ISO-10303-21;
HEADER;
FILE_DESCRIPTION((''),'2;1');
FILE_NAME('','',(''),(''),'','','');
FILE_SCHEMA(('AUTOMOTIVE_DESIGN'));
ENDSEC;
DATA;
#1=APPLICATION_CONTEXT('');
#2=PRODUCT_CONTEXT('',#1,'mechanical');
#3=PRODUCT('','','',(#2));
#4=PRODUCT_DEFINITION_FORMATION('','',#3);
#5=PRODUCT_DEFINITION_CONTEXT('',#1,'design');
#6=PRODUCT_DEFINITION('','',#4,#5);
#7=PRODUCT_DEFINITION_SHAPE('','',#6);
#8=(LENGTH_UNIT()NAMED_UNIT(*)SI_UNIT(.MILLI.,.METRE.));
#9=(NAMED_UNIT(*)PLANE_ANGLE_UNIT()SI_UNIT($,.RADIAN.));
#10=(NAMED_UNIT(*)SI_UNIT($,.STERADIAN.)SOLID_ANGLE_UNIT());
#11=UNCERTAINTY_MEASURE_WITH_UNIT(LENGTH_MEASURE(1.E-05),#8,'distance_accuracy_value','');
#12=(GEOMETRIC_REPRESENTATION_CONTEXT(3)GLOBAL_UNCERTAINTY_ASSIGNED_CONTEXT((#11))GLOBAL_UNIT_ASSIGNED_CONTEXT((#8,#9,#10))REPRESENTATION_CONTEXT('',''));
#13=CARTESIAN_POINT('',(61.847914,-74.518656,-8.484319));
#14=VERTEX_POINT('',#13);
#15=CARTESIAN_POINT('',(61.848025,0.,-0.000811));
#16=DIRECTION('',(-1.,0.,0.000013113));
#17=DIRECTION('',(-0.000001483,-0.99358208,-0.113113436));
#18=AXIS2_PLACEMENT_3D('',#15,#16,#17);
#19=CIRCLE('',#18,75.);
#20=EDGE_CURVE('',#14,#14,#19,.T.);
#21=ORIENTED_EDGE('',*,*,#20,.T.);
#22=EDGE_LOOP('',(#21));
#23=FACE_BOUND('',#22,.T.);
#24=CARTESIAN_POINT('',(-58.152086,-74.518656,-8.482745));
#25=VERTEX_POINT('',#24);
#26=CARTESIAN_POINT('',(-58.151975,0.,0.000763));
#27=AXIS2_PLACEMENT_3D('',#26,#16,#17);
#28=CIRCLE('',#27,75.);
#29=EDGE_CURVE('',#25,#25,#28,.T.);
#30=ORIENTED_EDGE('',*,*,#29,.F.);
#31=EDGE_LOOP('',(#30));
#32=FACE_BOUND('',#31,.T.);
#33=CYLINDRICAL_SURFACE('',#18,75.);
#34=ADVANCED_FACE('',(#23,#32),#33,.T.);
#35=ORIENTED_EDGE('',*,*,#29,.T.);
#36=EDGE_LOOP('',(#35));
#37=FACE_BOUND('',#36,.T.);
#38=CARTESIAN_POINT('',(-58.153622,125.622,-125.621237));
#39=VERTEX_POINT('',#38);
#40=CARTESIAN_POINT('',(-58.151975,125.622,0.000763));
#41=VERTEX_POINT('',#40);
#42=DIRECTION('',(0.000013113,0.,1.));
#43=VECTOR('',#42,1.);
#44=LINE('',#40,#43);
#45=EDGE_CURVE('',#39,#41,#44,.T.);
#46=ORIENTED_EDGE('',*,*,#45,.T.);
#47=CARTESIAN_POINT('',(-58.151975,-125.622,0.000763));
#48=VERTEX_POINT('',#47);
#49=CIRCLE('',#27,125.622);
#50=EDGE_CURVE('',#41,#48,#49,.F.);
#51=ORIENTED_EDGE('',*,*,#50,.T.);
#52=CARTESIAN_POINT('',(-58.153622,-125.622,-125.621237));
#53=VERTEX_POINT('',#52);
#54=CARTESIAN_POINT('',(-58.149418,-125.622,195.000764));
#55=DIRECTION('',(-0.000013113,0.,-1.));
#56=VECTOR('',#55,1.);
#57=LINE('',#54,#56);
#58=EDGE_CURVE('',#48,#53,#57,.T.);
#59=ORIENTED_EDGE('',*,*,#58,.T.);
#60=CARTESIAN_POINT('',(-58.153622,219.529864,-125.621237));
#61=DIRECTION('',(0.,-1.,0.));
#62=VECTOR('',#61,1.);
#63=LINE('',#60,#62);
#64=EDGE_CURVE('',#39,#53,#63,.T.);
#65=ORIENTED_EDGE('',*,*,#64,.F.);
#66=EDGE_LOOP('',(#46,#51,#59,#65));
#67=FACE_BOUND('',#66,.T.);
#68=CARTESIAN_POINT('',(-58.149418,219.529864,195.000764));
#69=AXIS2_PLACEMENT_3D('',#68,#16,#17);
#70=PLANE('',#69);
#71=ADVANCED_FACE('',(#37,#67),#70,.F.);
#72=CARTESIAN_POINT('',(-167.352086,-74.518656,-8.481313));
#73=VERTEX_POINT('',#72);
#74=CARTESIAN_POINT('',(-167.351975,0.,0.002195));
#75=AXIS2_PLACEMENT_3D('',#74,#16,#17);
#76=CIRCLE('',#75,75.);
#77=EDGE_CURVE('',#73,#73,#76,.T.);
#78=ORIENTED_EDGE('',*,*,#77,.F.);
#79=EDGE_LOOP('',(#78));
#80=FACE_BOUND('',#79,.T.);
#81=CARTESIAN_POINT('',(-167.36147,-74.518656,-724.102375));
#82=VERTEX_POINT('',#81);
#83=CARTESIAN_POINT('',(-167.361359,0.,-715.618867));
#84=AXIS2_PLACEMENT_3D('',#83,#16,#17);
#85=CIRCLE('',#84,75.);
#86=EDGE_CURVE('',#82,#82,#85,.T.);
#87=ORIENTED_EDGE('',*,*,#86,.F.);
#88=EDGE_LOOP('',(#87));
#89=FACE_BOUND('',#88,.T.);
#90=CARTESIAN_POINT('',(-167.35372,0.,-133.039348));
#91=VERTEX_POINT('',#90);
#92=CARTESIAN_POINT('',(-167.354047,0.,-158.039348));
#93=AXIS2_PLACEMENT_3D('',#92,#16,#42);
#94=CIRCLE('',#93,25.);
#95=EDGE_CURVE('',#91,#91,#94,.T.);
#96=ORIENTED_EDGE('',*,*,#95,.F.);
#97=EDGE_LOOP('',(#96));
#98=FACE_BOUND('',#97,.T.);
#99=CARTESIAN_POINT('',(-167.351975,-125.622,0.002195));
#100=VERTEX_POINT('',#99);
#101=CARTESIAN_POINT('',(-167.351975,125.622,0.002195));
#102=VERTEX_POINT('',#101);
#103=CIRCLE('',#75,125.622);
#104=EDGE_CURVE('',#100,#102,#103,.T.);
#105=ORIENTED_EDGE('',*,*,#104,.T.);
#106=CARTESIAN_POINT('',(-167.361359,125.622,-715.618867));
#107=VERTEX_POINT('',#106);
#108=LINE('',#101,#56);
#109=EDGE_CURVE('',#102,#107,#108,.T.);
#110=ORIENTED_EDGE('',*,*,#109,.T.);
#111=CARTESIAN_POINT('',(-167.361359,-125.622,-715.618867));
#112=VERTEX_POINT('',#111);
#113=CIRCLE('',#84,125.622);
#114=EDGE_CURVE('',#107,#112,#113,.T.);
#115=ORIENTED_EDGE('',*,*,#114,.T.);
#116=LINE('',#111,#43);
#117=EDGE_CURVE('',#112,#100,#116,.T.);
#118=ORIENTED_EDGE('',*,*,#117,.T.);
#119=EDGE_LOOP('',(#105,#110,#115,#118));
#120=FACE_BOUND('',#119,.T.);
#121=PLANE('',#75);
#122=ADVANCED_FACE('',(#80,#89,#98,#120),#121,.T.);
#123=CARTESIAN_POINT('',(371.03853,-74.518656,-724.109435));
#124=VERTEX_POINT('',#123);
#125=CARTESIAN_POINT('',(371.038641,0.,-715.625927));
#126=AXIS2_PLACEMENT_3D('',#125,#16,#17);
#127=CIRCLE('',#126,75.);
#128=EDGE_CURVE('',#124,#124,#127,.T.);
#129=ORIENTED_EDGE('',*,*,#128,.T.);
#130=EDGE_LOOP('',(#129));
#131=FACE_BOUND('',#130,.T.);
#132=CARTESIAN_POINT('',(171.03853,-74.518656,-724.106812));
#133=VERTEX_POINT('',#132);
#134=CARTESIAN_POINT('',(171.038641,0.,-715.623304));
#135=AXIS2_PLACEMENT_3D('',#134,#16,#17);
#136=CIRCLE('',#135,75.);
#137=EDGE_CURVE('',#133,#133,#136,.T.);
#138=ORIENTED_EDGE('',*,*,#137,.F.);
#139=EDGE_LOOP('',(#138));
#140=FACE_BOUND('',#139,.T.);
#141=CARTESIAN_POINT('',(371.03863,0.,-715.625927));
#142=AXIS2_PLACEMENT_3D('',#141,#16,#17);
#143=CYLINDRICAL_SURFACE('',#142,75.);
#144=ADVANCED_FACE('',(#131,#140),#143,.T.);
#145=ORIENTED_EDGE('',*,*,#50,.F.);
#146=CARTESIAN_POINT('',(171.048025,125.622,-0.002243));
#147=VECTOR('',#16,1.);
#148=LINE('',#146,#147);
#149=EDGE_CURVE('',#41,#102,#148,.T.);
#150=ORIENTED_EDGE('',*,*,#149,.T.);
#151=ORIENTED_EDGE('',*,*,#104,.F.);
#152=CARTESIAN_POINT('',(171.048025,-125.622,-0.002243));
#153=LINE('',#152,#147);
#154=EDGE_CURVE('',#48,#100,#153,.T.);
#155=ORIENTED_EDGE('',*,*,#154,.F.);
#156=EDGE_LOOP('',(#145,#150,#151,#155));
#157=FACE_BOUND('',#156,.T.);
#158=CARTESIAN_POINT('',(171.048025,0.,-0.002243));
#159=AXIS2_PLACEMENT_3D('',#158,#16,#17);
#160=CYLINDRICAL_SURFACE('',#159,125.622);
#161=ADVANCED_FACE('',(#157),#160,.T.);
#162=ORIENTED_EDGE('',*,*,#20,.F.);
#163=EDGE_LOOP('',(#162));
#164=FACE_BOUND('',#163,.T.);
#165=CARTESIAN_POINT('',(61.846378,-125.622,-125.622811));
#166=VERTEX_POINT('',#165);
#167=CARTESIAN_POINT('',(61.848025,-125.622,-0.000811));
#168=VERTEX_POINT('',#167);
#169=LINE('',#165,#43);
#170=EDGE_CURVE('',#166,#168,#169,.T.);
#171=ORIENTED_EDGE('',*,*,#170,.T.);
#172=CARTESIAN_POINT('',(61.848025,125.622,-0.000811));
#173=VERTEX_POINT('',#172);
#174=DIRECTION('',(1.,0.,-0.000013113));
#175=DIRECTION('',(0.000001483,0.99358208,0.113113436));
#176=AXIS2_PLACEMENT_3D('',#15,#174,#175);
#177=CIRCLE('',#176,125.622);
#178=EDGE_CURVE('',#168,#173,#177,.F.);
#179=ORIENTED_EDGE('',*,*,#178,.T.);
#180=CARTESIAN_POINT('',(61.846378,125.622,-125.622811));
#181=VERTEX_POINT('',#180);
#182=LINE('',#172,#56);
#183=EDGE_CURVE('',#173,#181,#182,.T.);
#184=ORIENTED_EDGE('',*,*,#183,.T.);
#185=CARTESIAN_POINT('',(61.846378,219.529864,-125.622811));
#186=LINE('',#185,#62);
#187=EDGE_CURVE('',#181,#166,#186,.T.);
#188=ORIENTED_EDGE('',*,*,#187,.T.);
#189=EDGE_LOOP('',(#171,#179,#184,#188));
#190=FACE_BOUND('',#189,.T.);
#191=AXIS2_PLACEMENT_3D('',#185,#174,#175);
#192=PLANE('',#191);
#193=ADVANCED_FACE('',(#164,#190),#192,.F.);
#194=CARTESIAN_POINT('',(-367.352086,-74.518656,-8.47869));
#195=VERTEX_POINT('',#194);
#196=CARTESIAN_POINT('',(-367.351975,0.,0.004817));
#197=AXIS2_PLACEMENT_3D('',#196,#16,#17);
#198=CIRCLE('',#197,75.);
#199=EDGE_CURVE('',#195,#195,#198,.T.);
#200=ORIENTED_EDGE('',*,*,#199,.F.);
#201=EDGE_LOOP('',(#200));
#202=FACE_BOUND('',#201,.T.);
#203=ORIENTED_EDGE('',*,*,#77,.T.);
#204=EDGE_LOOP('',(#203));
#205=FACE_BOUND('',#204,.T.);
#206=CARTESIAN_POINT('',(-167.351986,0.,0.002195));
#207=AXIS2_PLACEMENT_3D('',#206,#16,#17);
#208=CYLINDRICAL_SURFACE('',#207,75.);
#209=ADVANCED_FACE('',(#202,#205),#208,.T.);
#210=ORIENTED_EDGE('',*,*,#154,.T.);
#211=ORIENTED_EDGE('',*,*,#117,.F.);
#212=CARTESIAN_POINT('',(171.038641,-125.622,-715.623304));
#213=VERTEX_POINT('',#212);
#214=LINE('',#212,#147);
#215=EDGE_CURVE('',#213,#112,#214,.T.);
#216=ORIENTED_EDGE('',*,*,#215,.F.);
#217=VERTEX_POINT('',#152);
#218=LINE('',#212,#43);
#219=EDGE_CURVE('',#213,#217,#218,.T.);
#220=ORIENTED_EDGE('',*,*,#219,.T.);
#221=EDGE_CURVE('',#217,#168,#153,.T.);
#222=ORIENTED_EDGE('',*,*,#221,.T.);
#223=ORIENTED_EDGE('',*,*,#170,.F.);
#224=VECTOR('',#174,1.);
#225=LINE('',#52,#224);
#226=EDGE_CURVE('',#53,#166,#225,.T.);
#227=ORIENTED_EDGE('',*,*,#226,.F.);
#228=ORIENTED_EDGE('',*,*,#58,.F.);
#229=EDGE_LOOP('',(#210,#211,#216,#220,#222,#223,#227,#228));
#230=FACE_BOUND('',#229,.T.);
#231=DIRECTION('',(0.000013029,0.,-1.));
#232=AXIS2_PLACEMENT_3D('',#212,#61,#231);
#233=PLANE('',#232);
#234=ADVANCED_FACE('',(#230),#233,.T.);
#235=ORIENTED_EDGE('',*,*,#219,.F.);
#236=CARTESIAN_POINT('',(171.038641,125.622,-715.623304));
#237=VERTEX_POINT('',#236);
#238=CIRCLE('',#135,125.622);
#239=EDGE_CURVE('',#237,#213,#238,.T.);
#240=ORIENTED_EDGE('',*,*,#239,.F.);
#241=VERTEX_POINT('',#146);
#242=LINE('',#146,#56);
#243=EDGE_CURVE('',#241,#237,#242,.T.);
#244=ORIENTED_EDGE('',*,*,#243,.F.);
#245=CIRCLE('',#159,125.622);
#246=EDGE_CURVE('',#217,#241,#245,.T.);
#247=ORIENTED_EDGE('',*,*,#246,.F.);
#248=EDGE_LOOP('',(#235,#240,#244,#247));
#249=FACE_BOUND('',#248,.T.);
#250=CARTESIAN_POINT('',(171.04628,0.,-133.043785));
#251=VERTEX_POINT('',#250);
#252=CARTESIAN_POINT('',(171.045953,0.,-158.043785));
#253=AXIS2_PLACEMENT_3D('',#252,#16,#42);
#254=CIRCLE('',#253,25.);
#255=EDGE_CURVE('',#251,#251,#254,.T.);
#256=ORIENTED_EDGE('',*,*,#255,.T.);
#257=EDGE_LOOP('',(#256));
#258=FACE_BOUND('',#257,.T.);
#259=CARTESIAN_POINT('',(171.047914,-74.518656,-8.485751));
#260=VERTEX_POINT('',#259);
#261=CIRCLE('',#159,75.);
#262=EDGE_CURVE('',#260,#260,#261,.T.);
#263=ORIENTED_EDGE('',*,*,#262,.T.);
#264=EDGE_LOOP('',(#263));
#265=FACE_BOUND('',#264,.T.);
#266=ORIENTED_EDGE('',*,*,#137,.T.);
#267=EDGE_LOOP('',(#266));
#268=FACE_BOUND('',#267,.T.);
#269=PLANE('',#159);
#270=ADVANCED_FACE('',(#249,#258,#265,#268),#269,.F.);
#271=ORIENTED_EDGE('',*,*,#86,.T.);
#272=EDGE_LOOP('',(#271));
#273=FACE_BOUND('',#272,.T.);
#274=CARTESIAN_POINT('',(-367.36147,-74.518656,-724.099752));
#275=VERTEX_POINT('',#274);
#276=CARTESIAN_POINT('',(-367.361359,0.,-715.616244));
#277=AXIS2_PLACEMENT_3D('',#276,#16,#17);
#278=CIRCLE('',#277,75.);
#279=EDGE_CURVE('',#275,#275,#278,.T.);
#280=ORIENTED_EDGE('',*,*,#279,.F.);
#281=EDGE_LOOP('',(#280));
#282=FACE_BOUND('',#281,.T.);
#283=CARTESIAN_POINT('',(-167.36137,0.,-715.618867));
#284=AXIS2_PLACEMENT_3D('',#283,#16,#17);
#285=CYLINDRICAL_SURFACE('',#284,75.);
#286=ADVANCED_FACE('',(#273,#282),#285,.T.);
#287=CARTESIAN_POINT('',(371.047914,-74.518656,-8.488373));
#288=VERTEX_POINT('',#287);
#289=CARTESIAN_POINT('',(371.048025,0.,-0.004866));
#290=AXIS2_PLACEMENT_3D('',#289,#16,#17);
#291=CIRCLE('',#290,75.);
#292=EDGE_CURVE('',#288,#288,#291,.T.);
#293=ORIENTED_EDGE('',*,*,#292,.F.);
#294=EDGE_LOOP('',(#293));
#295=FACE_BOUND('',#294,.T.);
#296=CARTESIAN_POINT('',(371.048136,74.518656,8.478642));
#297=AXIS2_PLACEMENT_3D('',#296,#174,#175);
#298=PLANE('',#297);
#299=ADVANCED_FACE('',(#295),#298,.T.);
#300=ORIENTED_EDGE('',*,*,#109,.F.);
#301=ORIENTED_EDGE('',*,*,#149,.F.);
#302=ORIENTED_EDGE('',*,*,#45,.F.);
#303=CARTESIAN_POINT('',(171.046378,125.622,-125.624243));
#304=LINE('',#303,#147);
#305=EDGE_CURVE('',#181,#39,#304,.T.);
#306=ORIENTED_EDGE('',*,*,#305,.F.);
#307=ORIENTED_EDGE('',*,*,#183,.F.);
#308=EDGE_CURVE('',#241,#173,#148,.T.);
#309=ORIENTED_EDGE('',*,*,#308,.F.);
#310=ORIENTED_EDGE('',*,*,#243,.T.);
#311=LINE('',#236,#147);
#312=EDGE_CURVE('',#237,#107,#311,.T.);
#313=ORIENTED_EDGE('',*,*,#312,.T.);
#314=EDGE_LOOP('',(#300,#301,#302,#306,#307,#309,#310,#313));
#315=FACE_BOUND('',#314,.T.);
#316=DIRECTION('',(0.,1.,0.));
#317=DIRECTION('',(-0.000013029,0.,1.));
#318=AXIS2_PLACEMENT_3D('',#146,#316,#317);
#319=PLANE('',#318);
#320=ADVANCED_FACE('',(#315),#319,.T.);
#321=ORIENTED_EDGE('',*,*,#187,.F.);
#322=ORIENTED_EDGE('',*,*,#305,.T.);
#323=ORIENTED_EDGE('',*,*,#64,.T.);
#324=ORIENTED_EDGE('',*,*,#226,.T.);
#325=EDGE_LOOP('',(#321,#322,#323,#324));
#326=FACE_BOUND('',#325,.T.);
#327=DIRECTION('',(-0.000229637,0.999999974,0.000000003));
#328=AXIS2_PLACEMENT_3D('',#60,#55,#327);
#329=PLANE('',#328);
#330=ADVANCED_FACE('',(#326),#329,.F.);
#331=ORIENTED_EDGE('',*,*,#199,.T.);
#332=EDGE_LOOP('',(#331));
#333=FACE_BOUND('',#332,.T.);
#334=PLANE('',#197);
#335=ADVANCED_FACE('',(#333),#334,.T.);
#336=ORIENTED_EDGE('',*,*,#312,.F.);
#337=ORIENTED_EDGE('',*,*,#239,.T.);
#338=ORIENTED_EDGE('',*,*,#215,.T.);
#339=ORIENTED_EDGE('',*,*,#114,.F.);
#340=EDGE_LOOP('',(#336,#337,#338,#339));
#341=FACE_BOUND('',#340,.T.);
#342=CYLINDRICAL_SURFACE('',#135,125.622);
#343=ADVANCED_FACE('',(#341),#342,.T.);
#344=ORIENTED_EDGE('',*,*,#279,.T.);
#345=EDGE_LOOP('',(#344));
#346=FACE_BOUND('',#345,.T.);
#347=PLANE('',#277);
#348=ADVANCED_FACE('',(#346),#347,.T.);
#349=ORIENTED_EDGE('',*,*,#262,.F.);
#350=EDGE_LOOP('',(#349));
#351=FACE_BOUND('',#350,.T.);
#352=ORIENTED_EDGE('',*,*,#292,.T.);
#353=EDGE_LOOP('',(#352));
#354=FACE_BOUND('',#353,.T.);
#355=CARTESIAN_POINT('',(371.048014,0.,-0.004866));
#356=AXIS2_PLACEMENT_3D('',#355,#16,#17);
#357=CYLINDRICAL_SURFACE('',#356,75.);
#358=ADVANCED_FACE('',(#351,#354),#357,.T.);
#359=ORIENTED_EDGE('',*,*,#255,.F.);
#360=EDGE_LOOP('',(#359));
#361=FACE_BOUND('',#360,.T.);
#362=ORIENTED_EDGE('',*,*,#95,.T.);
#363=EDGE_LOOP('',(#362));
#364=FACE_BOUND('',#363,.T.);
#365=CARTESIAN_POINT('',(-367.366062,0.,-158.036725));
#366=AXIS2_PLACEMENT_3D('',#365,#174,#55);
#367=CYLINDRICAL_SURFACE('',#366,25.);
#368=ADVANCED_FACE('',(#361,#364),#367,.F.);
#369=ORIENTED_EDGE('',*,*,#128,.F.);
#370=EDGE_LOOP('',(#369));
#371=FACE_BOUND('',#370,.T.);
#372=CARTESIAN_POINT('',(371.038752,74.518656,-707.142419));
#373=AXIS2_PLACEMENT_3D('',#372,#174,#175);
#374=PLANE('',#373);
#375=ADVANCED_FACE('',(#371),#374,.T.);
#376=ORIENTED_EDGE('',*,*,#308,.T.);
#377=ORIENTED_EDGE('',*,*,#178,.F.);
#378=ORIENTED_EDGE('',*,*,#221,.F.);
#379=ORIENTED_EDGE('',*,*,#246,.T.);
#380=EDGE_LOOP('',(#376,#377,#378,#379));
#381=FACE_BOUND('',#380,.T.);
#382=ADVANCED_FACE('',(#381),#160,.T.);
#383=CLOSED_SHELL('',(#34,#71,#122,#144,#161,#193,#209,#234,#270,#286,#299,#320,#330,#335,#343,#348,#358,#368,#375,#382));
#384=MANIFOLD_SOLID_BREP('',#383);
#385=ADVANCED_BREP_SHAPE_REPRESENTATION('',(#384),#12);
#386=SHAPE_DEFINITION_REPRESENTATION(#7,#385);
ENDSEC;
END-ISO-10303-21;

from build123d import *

# Parameters (mm, degrees)
BOSS_EXTRUDE1_DEPTH     = 338.4
CUT_EXTRUDE1_DEPTH      = 4078.516360054
BODY_MOVE_COPY1_ANGLE   = 6.4948363
CUT_EXTRUDE2_DEPTH      = 1007.656101098
CUT_EXTRUDE2_DEPTH_BACK = 1007.656101098
SKETCH8_R               = 25


with BuildPart() as part:
    # Sketch1 → Boss-Extrude1 (new body)
    with BuildSketch(Plane(origin=(-169.199995481, 0.039105561, 0), x_dir=(-0.00023112033831648726, -0.9999999732916943, 0), z_dir=(-0.9999999732916943, 0.00023112033831648726, -9.983680815562587e-14))):
        with BuildLine():
            Line((-8457.49603755, 2990.648405965), (-8376.54968012, 2279.62014296))
            ThreePointArc((-8376.54968012, 2279.62014296), (-8237.524375906, 2169.013910965), (-8126.918143911, 2308.039215179))
            Line((-8126.918143911, 2308.039215179), (-8207.864501341, 3019.067478184))
            ThreePointArc((-8207.864501341, 3019.067478184), (-8346.889805555, 3129.673710179), (-8457.49603755, 2990.648405965))
        make_face()
    extrude(amount=-BOSS_EXTRUDE1_DEPTH)

    # Sketch2 → Cut-Extrude1 (cut, through all)
    with BuildSketch(Plane(origin=(1.794312536, 7763.54214826, -883.833325812), x_dir=(0.9999999736334177, -0.00022816323452923984, 2.597503388930373e-05), z_dir=(-0.0002296370265797643, -0.9935820538684025, 0.11311343641443838))):
        Polygon((60.107789667, 4123.109536872), (-59.892210195, 4123.11267401), (-59.900592157, 3802.490672498), (60.099407705, 3802.48753536), align=None)
    extrude(amount=-CUT_EXTRUDE1_DEPTH, mode=Mode.SUBTRACT)

    # Sketch3 → Revolve1 (revolve)
    with BuildSketch(Plane(origin=(2e-09, 0, 3004.857942074), x_dir=(-1, 0, 0), z_dir=(0, 0, -1)), mode=Mode.PRIVATE) as revolve1_sk:
        Polygon((-61.943184257, 8407.666177671), (-61.925850231, 8332.666179674), (58.07414647, 8332.693914114), (58.056812444, 8407.693912112), align=None)
    revolve(revolve1_sk.sketch.rotate(Axis((61.925850233, 8332.666179674, 3004.857942074), (-0.9999999732916957, 0.0002311203324015103, 5.403085390737201e-13)), 180), axis=Axis((61.925850233, 8332.666179674, 3004.857942074), (-0.9999999732916957, 0.0002311203324015103, 5.403085390737201e-13)))

    # Sketch4 → Revolve2 (revolve)
    with BuildSketch(Plane(origin=(1e-09, 0, 2293.82967907), x_dir=(-1, 0, 0), z_dir=(0, 0, -1)), mode=Mode.PRIVATE) as revolve2_sk:
        Polygon((-371.124467697, 8326.648359994), (-371.107133671, 8251.648361997), (-171.107139013, 8251.694586065), (-171.124473038, 8326.694584062), align=None)
    revolve(revolve2_sk.sketch.rotate(Axis((371.107122989, 8251.648361999, 2293.829679069), (-0.9999999732916943, 0.0002311203383076049, 5.395684476116649e-13)), 180), axis=Axis((371.107122989, 8251.648361999, 2293.829679069), (-0.9999999732916943, 0.0002311203383076049, 5.395684476116649e-13)))

    # Sketch5 → Revolve3 (revolve)
    with BuildSketch(Plane(origin=(2e-09, 0, 3004.857942074), x_dir=(-1, 0, 0), z_dir=(0, 0, -1)), mode=Mode.PRIVATE) as revolve3_sk:
        Polygon((-371.143176046, 8407.594715262), (-371.12584202, 8332.594717265), (-171.125847362, 8332.640941332), (-171.143181387, 8407.640939329), align=None)
    revolve(revolve3_sk.sketch.rotate(Axis((371.125831339, 8332.594717267, 3004.857942074), (-0.9999999732916943, 0.00023112033830760464, 5.395684476116643e-13)), 180), axis=Axis((371.125831339, 8332.594717267, 3004.857942074), (-0.9999999732916943, 0.00023112033830760464, 5.395684476116643e-13)))

    # Sketch6 → Revolve4 (revolve)
    with BuildSketch(Plane(origin=(1e-09, 0, 2293.82967907), x_dir=(-1, 0, 0), z_dir=(0, 0, -1)), mode=Mode.PRIVATE) as revolve4_sk:
        Polygon((167.275517924, 8326.772795184), (167.292851949, 8251.772797187), (367.292846607, 8251.819021255), (367.275512582, 8326.819019252), align=None)
    revolve(revolve4_sk.sketch.rotate(Axis((-167.292862631, 8251.77279719, 2293.82967907), (-0.9999999732916943, 0.00023112033831648596, 5.41788893898131e-13)), 180), axis=Axis((-167.292862631, 8251.77279719, 2293.82967907), (-0.9999999732916943, 0.00023112033831648596, 5.41788893898131e-13)))

    # Sketch7 → Revolve5 (revolve)
    with BuildSketch(Plane(origin=(2e-09, 0, 3004.857942074), x_dir=(-1, 0, 0), z_dir=(0, 0, -1)), mode=Mode.PRIVATE) as revolve5_sk:
        Polygon((167.256809575, 8407.719150452), (167.2741436, 8332.719152455), (367.274138258, 8332.765376523), (367.256804233, 8407.765374519), align=None)
    revolve(revolve5_sk.sketch.rotate(Axis((-167.274154282, 8332.719152457, 3004.857942075), (-0.9999999732916943, 0.00023112033831648528, 5.417888938981294e-13)), 180), axis=Axis((-167.274154282, 8332.719152457, 3004.857942075), (-0.9999999732916943, 0.00023112033831648528, 5.417888938981294e-13)))


with BuildPart() as part_1:
    # Body-Move/Copy1: read off the stored shape, not the designer's step
    # Body-Move/Copy1: moved
    add(part.part.moved(Location((1.8963, 208.8730906, -934.0697721))).rotate(Axis((0, 0, 0), (0.9999979393, 0, 0.0020301439)), BODY_MOVE_COPY1_ANGLE))


with BuildPart() as part_2:
    # Body-Move/Copy2: read off the stored shape, not the designer's step
    # Body-Move/Copy2: moved
    add(part_1.part.moved(Location((-0.0396508, -8252.5008213, -3023.6625196))))

    # Sketch8 → Cut-Extrude2 (cut, two sides: drawn at the far end of the back side and taken through both)
    with BuildSketch(Plane(origin=(171.048025075, 0, -0.002243036), x_dir=(-1.311348857824843e-05, 0, -0.9999999999140183), z_dir=(0.9999999999140183, 0, -1.311348857824843e-05)).offset(-CUT_EXTRUDE2_DEPTH_BACK)):
        with Locations(Location((158.041542403, 0, 0), (0, 0, 180))):
            Circle(SKETCH8_R)
    extrude(amount=CUT_EXTRUDE2_DEPTH + CUT_EXTRUDE2_DEPTH_BACK, mode=Mode.SUBTRACT)


solid = part_2.part
